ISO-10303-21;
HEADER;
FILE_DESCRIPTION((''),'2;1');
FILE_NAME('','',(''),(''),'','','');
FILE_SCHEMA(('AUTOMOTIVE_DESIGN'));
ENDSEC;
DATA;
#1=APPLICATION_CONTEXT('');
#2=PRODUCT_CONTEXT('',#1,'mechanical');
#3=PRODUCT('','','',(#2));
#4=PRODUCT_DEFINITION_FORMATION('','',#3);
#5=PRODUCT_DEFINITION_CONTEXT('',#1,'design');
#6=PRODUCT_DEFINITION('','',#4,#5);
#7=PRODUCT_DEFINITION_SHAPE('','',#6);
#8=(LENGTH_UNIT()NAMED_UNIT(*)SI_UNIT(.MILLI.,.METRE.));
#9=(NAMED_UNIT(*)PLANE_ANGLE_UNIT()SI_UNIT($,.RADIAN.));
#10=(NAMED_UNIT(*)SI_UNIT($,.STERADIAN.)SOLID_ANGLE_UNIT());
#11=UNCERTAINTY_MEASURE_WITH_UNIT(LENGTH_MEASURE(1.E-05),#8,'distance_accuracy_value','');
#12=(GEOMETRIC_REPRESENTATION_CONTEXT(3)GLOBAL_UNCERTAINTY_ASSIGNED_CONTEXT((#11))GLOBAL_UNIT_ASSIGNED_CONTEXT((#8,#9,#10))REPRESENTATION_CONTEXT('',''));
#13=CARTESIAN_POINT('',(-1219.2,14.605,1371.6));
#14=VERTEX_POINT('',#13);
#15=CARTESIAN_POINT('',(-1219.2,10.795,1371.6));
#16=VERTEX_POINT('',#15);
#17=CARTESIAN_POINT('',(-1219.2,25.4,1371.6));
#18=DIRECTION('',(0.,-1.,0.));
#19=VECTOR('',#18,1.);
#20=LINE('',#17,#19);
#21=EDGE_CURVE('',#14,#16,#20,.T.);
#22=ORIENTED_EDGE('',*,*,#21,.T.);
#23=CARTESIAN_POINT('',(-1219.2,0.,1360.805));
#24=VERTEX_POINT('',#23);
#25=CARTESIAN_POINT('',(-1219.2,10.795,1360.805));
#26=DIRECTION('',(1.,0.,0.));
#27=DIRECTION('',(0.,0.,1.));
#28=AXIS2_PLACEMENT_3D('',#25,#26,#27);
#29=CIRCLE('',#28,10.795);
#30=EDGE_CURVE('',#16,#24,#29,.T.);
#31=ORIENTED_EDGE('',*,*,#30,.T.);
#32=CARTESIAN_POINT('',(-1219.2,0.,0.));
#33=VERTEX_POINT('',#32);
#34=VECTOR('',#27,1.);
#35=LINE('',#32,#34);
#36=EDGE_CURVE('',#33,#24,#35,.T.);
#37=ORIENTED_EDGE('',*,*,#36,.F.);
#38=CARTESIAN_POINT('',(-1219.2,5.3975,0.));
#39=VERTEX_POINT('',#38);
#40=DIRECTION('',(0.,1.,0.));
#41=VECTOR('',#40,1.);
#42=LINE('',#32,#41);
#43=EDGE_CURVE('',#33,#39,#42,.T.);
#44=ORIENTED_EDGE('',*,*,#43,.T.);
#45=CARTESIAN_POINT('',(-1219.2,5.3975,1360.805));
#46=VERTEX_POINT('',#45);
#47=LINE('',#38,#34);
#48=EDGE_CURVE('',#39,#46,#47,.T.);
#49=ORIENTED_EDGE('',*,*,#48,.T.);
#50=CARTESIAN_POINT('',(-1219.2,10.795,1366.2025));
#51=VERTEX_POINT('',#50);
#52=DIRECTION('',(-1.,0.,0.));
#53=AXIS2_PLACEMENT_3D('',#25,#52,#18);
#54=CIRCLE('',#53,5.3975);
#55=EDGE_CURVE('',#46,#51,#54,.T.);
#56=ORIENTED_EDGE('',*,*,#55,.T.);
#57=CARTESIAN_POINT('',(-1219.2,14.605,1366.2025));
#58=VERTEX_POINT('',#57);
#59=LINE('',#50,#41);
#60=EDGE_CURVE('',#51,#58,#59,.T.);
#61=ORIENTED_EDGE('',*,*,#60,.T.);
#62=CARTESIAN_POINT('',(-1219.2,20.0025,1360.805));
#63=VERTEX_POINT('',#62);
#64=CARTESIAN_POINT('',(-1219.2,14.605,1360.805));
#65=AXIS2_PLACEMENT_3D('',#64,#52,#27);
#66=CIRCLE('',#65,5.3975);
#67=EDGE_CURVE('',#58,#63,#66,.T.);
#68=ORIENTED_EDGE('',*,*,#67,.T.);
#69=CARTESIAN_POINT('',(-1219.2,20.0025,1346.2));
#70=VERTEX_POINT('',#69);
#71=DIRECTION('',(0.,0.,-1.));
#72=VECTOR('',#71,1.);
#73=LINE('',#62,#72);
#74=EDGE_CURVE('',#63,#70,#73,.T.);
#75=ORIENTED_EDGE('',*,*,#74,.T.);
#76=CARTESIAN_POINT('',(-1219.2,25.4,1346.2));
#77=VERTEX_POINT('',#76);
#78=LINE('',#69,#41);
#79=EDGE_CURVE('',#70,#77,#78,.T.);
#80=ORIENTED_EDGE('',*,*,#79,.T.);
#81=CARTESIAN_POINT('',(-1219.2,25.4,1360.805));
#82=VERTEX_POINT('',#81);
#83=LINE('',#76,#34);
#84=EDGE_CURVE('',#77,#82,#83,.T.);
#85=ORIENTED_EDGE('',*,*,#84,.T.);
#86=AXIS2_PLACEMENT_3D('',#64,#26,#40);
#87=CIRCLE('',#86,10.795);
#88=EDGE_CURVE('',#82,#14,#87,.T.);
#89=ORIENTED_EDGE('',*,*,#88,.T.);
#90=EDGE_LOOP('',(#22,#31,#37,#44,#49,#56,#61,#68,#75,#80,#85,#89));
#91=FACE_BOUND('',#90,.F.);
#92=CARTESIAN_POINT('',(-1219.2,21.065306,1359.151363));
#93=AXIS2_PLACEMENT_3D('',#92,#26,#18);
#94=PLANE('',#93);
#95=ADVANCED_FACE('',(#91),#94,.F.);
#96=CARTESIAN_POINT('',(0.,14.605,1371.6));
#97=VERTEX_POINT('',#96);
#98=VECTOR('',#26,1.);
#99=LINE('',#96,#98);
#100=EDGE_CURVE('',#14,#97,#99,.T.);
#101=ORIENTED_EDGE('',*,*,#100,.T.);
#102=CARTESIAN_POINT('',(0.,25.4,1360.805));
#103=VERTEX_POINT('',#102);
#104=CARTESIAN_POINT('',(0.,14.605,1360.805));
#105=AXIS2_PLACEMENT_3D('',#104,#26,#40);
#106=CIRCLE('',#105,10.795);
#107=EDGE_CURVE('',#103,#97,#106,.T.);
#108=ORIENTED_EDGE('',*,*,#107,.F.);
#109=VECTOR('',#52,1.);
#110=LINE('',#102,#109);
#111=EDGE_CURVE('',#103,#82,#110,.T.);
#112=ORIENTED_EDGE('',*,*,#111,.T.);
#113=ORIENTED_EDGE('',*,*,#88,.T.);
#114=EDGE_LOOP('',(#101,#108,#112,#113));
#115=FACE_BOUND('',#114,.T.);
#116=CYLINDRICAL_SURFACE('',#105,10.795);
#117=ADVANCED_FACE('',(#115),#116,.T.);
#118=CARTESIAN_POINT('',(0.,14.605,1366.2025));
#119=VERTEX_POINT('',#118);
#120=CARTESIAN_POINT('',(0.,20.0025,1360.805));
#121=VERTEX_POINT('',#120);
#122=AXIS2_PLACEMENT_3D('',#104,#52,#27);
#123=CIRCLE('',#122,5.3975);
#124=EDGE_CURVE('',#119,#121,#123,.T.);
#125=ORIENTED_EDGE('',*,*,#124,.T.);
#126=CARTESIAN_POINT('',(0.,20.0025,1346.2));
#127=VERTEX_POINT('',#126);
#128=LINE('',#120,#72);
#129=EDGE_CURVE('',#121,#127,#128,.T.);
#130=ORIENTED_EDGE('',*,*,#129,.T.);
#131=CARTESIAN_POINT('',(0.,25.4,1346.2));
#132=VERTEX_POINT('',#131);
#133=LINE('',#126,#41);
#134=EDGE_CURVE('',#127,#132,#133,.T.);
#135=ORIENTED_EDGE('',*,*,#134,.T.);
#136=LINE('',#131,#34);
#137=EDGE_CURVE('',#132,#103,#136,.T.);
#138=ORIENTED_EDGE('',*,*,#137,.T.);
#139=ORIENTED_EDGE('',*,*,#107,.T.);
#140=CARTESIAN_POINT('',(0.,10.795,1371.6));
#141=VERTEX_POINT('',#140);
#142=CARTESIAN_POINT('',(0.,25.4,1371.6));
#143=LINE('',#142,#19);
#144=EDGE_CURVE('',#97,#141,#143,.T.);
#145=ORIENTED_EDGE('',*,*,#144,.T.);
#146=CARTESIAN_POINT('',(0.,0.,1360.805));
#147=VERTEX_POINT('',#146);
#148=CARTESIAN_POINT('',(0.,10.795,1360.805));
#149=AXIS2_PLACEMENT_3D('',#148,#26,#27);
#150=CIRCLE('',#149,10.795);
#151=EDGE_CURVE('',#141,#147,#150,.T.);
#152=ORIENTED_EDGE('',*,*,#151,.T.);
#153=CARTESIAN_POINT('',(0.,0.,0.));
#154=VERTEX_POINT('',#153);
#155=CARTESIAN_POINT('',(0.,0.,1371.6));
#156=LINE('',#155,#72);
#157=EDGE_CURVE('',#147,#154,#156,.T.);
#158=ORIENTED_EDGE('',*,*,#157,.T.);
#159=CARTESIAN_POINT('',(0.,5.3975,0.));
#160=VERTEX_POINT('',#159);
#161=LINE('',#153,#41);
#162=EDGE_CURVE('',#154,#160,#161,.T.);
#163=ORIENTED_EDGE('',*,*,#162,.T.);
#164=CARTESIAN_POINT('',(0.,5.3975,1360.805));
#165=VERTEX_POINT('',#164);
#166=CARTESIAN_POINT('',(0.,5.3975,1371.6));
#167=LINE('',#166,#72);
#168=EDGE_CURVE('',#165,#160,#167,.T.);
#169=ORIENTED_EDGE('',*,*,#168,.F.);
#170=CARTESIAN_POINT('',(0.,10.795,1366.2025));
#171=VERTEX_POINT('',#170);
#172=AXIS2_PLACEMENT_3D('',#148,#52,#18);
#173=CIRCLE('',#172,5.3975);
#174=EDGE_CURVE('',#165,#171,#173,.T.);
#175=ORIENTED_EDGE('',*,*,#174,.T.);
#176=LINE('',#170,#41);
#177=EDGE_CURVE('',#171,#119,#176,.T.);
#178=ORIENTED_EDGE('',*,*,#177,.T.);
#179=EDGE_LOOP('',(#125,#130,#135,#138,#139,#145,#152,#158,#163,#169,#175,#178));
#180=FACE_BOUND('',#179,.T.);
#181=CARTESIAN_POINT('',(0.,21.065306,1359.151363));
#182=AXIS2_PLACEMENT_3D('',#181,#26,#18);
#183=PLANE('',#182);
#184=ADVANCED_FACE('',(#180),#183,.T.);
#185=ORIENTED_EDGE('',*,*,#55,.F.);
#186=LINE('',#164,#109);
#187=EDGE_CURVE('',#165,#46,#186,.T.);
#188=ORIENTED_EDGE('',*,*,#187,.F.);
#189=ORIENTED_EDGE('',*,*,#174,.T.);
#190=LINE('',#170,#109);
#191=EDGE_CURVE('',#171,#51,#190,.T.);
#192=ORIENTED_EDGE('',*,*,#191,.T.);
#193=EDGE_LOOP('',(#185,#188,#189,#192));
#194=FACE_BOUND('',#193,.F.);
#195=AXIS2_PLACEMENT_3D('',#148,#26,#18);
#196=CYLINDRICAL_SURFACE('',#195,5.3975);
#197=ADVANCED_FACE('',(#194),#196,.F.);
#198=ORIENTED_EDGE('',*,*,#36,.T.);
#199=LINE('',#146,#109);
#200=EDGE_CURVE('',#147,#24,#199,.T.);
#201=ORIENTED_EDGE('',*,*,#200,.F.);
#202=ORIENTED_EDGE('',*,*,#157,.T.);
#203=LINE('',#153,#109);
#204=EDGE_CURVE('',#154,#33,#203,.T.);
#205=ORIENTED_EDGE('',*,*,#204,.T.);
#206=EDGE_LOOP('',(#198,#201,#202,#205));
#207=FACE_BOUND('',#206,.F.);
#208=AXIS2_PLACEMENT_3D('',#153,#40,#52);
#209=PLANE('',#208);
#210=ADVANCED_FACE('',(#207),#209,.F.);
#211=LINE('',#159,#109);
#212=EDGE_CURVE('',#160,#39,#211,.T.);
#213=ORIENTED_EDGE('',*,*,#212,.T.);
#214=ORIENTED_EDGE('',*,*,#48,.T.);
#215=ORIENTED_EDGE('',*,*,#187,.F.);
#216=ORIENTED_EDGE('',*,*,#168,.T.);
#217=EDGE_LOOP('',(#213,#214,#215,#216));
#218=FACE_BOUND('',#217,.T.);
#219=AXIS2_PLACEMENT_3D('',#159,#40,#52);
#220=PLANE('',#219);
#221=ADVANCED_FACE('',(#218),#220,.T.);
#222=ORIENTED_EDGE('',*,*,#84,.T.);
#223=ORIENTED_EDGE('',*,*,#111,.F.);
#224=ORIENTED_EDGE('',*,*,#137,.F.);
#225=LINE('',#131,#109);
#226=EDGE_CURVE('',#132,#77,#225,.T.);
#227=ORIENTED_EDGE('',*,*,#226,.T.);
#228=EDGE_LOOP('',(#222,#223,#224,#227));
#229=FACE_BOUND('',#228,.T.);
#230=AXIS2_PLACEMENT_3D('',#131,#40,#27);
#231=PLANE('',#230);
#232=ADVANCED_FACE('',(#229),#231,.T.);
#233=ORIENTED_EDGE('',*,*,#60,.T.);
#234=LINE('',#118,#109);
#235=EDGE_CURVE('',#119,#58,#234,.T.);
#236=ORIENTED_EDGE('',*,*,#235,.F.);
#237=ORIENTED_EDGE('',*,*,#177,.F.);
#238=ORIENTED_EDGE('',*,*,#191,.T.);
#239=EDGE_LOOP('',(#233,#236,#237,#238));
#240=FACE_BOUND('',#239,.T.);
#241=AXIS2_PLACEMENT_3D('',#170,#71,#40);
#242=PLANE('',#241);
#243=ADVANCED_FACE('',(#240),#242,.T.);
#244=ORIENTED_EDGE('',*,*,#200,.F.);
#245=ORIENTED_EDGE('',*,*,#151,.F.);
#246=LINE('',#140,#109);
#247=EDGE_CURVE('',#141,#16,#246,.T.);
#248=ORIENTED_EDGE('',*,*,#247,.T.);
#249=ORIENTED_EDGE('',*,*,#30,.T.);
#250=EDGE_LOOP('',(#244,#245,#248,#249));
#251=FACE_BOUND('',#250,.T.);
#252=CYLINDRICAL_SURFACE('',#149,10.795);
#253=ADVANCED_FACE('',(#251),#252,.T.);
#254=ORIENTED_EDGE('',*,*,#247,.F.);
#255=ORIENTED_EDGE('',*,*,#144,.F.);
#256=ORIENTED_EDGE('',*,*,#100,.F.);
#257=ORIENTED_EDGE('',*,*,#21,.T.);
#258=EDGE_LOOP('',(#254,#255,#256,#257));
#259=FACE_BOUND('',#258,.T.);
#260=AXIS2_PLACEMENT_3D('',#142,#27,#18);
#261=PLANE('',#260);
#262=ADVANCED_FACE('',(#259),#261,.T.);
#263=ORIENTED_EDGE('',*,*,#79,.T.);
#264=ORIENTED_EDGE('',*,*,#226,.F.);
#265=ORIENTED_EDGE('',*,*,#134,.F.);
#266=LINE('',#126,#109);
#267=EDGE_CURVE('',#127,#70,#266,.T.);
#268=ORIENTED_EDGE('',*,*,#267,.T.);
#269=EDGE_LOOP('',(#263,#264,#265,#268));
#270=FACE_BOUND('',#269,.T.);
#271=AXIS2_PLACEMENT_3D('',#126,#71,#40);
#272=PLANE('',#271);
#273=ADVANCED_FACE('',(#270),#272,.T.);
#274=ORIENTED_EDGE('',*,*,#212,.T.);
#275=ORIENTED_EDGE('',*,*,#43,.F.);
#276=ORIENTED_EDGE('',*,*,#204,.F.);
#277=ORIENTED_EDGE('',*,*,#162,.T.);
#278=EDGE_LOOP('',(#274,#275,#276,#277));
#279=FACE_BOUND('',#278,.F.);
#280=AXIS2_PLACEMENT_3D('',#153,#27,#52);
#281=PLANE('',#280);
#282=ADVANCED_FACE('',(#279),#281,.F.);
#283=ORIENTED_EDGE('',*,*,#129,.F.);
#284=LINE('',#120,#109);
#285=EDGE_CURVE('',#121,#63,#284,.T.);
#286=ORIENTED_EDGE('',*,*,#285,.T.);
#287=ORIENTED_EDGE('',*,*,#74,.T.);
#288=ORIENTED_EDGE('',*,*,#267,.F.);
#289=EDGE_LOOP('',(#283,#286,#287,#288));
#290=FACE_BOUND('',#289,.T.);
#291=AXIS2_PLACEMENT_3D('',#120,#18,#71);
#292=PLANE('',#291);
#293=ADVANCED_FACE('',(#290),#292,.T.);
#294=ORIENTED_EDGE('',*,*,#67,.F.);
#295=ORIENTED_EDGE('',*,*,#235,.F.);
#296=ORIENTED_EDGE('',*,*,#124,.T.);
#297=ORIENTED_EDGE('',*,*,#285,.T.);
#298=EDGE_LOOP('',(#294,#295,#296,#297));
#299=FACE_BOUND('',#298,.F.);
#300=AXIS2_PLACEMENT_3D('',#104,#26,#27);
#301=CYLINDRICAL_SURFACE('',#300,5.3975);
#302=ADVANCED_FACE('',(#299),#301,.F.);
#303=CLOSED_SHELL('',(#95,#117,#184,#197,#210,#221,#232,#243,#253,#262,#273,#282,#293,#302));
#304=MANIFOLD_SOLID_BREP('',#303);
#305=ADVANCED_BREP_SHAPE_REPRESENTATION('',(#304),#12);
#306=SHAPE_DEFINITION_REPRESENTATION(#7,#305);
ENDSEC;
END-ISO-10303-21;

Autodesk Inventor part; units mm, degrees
ref_plane "YZ Plane" through (0, 0, 0) normal (1, 0, 0) x (0, 1, 0)
ref_plane "XZ Plane" through (0, 0, 0) normal (0, 1, 0) x (-1, 0, 0)
ref_plane "XY Plane" through (0, 0, 0) normal (0, 0, 1) x (1, 0, 0)
sketch "Sketch1" plane through (0, 0, 0) normal (0, 1, 0) x (-1, 0, 0)
  line L0 (0, 0) -> (1219.2, 0)
  line L1 (1219.2, 0) -> (1219.2, 1371.6)
  line L2 (1219.2, 1371.6) -> (0, 1371.6)
  line L3 (0, 1371.6) -> (0, 0)
  dimension "d0" = 1219.2
  dimension "d1" = 1371.6
extrude "Plate1" add sketch "Sketch1" along normal blind 5.3975
sketch "Sketch2" plane through (0, 0, 1366.2025) normal (0, 0, 1) x (1, 0, 0)
  line L0 (-1219.2, 0) -> (0, 0)
  line L1 (0, 0) -> (0, 25.4)
  line L2 (0, 25.4) -> (-1219.2, 25.4)
  line L3 (-1219.2, 25.4) -> (-1219.2, 0)
edge flange "Flange1" height 25.4 angle 90 thickness 5.3975 bend radius 5.3975 thickness toward (0, 0, 1) relief tear relief width 5.3975 relief depth 2.6987 edges at (-609.6, 5.3975, 1371.6) wall of the first edge with corners at (-1219.2, 0, 1366.2025) (0, 0, 1366.2025) (0, 25.4, 1366.2025) (-1219.2, 25.4, 1366.2025)
bend "Bend1"
corner "Corner1"
sketch "Sketch3" plane through (0, 20.0025, 1371.6) normal (0, 1, 0) x (-1, 0, 0)
  line L0 (1219.2, 0) -> (0, 0)
  line L1 (0, 0) -> (0, -25.4)
  line L2 (0, -25.4) -> (1219.2, -25.4)
  line L3 (1219.2, -25.4) -> (1219.2, 0)
edge flange "Flange2" height 25.4 angle 90 thickness 5.3975 bend radius 5.3975 thickness toward (0, 1, 0) relief tear relief width 5.3975 relief depth 2.6987 edges at (-609.6, 25.4, 1366.2025) wall of the first edge with corners at (-1219.2, 20.0025, 1371.6) (0, 20.0025, 1371.6) (0, 20.0025, 1346.2) (-1219.2, 20.0025, 1346.2)
bend "Bend2"
corner "Corner2"
equation "\"d3\" = BendReliefWidth"
equation "\"d4\" = BendReliefDepth"
equation "\"d5\" = MinimumRemnant"
equation "\"d6\" = BendRadius"
equation "\"d9\" = BendRadius"
equation "\"d10\" = CornerReliefSize"
equation "\"d11\" = GapSize"
equation "\"d12\" = JacobiRadiusSize"
equation "\"d13\" = BendReliefWidth"
equation "\"d14\" = BendReliefDepth"
equation "\"d15\" = MinimumRemnant"
equation "\"d16\" = BendRadius"
equation "\"d19\" = BendRadius"
equation "\"d20\" = CornerReliefSize"
equation "\"d21\" = GapSize"
equation "\"d22\" = JacobiRadiusSize"
equation "\"BendRadius\" = Thickness"
equation "\"BendReliefWidth\" = Thickness"
equation "\"BendReliefDepth\" = 0.5 * Thickness"
equation "\"CornerReliefSize\" = 4 * Thickness"
equation "\"MinimumRemnant\" = 2 * Thickness"
equation "\"TransitionRadius\" = BendRadius"
equation "\"JacobiRadiusSize\" = BendRadius"
equation "\"GapSize\" = Thickness"
equation "\"d2\" = BendRadius"
equation "\"Thickness\" = 5.3975"
properties part number "wall-side" material "Polycarbonate, Clear"
